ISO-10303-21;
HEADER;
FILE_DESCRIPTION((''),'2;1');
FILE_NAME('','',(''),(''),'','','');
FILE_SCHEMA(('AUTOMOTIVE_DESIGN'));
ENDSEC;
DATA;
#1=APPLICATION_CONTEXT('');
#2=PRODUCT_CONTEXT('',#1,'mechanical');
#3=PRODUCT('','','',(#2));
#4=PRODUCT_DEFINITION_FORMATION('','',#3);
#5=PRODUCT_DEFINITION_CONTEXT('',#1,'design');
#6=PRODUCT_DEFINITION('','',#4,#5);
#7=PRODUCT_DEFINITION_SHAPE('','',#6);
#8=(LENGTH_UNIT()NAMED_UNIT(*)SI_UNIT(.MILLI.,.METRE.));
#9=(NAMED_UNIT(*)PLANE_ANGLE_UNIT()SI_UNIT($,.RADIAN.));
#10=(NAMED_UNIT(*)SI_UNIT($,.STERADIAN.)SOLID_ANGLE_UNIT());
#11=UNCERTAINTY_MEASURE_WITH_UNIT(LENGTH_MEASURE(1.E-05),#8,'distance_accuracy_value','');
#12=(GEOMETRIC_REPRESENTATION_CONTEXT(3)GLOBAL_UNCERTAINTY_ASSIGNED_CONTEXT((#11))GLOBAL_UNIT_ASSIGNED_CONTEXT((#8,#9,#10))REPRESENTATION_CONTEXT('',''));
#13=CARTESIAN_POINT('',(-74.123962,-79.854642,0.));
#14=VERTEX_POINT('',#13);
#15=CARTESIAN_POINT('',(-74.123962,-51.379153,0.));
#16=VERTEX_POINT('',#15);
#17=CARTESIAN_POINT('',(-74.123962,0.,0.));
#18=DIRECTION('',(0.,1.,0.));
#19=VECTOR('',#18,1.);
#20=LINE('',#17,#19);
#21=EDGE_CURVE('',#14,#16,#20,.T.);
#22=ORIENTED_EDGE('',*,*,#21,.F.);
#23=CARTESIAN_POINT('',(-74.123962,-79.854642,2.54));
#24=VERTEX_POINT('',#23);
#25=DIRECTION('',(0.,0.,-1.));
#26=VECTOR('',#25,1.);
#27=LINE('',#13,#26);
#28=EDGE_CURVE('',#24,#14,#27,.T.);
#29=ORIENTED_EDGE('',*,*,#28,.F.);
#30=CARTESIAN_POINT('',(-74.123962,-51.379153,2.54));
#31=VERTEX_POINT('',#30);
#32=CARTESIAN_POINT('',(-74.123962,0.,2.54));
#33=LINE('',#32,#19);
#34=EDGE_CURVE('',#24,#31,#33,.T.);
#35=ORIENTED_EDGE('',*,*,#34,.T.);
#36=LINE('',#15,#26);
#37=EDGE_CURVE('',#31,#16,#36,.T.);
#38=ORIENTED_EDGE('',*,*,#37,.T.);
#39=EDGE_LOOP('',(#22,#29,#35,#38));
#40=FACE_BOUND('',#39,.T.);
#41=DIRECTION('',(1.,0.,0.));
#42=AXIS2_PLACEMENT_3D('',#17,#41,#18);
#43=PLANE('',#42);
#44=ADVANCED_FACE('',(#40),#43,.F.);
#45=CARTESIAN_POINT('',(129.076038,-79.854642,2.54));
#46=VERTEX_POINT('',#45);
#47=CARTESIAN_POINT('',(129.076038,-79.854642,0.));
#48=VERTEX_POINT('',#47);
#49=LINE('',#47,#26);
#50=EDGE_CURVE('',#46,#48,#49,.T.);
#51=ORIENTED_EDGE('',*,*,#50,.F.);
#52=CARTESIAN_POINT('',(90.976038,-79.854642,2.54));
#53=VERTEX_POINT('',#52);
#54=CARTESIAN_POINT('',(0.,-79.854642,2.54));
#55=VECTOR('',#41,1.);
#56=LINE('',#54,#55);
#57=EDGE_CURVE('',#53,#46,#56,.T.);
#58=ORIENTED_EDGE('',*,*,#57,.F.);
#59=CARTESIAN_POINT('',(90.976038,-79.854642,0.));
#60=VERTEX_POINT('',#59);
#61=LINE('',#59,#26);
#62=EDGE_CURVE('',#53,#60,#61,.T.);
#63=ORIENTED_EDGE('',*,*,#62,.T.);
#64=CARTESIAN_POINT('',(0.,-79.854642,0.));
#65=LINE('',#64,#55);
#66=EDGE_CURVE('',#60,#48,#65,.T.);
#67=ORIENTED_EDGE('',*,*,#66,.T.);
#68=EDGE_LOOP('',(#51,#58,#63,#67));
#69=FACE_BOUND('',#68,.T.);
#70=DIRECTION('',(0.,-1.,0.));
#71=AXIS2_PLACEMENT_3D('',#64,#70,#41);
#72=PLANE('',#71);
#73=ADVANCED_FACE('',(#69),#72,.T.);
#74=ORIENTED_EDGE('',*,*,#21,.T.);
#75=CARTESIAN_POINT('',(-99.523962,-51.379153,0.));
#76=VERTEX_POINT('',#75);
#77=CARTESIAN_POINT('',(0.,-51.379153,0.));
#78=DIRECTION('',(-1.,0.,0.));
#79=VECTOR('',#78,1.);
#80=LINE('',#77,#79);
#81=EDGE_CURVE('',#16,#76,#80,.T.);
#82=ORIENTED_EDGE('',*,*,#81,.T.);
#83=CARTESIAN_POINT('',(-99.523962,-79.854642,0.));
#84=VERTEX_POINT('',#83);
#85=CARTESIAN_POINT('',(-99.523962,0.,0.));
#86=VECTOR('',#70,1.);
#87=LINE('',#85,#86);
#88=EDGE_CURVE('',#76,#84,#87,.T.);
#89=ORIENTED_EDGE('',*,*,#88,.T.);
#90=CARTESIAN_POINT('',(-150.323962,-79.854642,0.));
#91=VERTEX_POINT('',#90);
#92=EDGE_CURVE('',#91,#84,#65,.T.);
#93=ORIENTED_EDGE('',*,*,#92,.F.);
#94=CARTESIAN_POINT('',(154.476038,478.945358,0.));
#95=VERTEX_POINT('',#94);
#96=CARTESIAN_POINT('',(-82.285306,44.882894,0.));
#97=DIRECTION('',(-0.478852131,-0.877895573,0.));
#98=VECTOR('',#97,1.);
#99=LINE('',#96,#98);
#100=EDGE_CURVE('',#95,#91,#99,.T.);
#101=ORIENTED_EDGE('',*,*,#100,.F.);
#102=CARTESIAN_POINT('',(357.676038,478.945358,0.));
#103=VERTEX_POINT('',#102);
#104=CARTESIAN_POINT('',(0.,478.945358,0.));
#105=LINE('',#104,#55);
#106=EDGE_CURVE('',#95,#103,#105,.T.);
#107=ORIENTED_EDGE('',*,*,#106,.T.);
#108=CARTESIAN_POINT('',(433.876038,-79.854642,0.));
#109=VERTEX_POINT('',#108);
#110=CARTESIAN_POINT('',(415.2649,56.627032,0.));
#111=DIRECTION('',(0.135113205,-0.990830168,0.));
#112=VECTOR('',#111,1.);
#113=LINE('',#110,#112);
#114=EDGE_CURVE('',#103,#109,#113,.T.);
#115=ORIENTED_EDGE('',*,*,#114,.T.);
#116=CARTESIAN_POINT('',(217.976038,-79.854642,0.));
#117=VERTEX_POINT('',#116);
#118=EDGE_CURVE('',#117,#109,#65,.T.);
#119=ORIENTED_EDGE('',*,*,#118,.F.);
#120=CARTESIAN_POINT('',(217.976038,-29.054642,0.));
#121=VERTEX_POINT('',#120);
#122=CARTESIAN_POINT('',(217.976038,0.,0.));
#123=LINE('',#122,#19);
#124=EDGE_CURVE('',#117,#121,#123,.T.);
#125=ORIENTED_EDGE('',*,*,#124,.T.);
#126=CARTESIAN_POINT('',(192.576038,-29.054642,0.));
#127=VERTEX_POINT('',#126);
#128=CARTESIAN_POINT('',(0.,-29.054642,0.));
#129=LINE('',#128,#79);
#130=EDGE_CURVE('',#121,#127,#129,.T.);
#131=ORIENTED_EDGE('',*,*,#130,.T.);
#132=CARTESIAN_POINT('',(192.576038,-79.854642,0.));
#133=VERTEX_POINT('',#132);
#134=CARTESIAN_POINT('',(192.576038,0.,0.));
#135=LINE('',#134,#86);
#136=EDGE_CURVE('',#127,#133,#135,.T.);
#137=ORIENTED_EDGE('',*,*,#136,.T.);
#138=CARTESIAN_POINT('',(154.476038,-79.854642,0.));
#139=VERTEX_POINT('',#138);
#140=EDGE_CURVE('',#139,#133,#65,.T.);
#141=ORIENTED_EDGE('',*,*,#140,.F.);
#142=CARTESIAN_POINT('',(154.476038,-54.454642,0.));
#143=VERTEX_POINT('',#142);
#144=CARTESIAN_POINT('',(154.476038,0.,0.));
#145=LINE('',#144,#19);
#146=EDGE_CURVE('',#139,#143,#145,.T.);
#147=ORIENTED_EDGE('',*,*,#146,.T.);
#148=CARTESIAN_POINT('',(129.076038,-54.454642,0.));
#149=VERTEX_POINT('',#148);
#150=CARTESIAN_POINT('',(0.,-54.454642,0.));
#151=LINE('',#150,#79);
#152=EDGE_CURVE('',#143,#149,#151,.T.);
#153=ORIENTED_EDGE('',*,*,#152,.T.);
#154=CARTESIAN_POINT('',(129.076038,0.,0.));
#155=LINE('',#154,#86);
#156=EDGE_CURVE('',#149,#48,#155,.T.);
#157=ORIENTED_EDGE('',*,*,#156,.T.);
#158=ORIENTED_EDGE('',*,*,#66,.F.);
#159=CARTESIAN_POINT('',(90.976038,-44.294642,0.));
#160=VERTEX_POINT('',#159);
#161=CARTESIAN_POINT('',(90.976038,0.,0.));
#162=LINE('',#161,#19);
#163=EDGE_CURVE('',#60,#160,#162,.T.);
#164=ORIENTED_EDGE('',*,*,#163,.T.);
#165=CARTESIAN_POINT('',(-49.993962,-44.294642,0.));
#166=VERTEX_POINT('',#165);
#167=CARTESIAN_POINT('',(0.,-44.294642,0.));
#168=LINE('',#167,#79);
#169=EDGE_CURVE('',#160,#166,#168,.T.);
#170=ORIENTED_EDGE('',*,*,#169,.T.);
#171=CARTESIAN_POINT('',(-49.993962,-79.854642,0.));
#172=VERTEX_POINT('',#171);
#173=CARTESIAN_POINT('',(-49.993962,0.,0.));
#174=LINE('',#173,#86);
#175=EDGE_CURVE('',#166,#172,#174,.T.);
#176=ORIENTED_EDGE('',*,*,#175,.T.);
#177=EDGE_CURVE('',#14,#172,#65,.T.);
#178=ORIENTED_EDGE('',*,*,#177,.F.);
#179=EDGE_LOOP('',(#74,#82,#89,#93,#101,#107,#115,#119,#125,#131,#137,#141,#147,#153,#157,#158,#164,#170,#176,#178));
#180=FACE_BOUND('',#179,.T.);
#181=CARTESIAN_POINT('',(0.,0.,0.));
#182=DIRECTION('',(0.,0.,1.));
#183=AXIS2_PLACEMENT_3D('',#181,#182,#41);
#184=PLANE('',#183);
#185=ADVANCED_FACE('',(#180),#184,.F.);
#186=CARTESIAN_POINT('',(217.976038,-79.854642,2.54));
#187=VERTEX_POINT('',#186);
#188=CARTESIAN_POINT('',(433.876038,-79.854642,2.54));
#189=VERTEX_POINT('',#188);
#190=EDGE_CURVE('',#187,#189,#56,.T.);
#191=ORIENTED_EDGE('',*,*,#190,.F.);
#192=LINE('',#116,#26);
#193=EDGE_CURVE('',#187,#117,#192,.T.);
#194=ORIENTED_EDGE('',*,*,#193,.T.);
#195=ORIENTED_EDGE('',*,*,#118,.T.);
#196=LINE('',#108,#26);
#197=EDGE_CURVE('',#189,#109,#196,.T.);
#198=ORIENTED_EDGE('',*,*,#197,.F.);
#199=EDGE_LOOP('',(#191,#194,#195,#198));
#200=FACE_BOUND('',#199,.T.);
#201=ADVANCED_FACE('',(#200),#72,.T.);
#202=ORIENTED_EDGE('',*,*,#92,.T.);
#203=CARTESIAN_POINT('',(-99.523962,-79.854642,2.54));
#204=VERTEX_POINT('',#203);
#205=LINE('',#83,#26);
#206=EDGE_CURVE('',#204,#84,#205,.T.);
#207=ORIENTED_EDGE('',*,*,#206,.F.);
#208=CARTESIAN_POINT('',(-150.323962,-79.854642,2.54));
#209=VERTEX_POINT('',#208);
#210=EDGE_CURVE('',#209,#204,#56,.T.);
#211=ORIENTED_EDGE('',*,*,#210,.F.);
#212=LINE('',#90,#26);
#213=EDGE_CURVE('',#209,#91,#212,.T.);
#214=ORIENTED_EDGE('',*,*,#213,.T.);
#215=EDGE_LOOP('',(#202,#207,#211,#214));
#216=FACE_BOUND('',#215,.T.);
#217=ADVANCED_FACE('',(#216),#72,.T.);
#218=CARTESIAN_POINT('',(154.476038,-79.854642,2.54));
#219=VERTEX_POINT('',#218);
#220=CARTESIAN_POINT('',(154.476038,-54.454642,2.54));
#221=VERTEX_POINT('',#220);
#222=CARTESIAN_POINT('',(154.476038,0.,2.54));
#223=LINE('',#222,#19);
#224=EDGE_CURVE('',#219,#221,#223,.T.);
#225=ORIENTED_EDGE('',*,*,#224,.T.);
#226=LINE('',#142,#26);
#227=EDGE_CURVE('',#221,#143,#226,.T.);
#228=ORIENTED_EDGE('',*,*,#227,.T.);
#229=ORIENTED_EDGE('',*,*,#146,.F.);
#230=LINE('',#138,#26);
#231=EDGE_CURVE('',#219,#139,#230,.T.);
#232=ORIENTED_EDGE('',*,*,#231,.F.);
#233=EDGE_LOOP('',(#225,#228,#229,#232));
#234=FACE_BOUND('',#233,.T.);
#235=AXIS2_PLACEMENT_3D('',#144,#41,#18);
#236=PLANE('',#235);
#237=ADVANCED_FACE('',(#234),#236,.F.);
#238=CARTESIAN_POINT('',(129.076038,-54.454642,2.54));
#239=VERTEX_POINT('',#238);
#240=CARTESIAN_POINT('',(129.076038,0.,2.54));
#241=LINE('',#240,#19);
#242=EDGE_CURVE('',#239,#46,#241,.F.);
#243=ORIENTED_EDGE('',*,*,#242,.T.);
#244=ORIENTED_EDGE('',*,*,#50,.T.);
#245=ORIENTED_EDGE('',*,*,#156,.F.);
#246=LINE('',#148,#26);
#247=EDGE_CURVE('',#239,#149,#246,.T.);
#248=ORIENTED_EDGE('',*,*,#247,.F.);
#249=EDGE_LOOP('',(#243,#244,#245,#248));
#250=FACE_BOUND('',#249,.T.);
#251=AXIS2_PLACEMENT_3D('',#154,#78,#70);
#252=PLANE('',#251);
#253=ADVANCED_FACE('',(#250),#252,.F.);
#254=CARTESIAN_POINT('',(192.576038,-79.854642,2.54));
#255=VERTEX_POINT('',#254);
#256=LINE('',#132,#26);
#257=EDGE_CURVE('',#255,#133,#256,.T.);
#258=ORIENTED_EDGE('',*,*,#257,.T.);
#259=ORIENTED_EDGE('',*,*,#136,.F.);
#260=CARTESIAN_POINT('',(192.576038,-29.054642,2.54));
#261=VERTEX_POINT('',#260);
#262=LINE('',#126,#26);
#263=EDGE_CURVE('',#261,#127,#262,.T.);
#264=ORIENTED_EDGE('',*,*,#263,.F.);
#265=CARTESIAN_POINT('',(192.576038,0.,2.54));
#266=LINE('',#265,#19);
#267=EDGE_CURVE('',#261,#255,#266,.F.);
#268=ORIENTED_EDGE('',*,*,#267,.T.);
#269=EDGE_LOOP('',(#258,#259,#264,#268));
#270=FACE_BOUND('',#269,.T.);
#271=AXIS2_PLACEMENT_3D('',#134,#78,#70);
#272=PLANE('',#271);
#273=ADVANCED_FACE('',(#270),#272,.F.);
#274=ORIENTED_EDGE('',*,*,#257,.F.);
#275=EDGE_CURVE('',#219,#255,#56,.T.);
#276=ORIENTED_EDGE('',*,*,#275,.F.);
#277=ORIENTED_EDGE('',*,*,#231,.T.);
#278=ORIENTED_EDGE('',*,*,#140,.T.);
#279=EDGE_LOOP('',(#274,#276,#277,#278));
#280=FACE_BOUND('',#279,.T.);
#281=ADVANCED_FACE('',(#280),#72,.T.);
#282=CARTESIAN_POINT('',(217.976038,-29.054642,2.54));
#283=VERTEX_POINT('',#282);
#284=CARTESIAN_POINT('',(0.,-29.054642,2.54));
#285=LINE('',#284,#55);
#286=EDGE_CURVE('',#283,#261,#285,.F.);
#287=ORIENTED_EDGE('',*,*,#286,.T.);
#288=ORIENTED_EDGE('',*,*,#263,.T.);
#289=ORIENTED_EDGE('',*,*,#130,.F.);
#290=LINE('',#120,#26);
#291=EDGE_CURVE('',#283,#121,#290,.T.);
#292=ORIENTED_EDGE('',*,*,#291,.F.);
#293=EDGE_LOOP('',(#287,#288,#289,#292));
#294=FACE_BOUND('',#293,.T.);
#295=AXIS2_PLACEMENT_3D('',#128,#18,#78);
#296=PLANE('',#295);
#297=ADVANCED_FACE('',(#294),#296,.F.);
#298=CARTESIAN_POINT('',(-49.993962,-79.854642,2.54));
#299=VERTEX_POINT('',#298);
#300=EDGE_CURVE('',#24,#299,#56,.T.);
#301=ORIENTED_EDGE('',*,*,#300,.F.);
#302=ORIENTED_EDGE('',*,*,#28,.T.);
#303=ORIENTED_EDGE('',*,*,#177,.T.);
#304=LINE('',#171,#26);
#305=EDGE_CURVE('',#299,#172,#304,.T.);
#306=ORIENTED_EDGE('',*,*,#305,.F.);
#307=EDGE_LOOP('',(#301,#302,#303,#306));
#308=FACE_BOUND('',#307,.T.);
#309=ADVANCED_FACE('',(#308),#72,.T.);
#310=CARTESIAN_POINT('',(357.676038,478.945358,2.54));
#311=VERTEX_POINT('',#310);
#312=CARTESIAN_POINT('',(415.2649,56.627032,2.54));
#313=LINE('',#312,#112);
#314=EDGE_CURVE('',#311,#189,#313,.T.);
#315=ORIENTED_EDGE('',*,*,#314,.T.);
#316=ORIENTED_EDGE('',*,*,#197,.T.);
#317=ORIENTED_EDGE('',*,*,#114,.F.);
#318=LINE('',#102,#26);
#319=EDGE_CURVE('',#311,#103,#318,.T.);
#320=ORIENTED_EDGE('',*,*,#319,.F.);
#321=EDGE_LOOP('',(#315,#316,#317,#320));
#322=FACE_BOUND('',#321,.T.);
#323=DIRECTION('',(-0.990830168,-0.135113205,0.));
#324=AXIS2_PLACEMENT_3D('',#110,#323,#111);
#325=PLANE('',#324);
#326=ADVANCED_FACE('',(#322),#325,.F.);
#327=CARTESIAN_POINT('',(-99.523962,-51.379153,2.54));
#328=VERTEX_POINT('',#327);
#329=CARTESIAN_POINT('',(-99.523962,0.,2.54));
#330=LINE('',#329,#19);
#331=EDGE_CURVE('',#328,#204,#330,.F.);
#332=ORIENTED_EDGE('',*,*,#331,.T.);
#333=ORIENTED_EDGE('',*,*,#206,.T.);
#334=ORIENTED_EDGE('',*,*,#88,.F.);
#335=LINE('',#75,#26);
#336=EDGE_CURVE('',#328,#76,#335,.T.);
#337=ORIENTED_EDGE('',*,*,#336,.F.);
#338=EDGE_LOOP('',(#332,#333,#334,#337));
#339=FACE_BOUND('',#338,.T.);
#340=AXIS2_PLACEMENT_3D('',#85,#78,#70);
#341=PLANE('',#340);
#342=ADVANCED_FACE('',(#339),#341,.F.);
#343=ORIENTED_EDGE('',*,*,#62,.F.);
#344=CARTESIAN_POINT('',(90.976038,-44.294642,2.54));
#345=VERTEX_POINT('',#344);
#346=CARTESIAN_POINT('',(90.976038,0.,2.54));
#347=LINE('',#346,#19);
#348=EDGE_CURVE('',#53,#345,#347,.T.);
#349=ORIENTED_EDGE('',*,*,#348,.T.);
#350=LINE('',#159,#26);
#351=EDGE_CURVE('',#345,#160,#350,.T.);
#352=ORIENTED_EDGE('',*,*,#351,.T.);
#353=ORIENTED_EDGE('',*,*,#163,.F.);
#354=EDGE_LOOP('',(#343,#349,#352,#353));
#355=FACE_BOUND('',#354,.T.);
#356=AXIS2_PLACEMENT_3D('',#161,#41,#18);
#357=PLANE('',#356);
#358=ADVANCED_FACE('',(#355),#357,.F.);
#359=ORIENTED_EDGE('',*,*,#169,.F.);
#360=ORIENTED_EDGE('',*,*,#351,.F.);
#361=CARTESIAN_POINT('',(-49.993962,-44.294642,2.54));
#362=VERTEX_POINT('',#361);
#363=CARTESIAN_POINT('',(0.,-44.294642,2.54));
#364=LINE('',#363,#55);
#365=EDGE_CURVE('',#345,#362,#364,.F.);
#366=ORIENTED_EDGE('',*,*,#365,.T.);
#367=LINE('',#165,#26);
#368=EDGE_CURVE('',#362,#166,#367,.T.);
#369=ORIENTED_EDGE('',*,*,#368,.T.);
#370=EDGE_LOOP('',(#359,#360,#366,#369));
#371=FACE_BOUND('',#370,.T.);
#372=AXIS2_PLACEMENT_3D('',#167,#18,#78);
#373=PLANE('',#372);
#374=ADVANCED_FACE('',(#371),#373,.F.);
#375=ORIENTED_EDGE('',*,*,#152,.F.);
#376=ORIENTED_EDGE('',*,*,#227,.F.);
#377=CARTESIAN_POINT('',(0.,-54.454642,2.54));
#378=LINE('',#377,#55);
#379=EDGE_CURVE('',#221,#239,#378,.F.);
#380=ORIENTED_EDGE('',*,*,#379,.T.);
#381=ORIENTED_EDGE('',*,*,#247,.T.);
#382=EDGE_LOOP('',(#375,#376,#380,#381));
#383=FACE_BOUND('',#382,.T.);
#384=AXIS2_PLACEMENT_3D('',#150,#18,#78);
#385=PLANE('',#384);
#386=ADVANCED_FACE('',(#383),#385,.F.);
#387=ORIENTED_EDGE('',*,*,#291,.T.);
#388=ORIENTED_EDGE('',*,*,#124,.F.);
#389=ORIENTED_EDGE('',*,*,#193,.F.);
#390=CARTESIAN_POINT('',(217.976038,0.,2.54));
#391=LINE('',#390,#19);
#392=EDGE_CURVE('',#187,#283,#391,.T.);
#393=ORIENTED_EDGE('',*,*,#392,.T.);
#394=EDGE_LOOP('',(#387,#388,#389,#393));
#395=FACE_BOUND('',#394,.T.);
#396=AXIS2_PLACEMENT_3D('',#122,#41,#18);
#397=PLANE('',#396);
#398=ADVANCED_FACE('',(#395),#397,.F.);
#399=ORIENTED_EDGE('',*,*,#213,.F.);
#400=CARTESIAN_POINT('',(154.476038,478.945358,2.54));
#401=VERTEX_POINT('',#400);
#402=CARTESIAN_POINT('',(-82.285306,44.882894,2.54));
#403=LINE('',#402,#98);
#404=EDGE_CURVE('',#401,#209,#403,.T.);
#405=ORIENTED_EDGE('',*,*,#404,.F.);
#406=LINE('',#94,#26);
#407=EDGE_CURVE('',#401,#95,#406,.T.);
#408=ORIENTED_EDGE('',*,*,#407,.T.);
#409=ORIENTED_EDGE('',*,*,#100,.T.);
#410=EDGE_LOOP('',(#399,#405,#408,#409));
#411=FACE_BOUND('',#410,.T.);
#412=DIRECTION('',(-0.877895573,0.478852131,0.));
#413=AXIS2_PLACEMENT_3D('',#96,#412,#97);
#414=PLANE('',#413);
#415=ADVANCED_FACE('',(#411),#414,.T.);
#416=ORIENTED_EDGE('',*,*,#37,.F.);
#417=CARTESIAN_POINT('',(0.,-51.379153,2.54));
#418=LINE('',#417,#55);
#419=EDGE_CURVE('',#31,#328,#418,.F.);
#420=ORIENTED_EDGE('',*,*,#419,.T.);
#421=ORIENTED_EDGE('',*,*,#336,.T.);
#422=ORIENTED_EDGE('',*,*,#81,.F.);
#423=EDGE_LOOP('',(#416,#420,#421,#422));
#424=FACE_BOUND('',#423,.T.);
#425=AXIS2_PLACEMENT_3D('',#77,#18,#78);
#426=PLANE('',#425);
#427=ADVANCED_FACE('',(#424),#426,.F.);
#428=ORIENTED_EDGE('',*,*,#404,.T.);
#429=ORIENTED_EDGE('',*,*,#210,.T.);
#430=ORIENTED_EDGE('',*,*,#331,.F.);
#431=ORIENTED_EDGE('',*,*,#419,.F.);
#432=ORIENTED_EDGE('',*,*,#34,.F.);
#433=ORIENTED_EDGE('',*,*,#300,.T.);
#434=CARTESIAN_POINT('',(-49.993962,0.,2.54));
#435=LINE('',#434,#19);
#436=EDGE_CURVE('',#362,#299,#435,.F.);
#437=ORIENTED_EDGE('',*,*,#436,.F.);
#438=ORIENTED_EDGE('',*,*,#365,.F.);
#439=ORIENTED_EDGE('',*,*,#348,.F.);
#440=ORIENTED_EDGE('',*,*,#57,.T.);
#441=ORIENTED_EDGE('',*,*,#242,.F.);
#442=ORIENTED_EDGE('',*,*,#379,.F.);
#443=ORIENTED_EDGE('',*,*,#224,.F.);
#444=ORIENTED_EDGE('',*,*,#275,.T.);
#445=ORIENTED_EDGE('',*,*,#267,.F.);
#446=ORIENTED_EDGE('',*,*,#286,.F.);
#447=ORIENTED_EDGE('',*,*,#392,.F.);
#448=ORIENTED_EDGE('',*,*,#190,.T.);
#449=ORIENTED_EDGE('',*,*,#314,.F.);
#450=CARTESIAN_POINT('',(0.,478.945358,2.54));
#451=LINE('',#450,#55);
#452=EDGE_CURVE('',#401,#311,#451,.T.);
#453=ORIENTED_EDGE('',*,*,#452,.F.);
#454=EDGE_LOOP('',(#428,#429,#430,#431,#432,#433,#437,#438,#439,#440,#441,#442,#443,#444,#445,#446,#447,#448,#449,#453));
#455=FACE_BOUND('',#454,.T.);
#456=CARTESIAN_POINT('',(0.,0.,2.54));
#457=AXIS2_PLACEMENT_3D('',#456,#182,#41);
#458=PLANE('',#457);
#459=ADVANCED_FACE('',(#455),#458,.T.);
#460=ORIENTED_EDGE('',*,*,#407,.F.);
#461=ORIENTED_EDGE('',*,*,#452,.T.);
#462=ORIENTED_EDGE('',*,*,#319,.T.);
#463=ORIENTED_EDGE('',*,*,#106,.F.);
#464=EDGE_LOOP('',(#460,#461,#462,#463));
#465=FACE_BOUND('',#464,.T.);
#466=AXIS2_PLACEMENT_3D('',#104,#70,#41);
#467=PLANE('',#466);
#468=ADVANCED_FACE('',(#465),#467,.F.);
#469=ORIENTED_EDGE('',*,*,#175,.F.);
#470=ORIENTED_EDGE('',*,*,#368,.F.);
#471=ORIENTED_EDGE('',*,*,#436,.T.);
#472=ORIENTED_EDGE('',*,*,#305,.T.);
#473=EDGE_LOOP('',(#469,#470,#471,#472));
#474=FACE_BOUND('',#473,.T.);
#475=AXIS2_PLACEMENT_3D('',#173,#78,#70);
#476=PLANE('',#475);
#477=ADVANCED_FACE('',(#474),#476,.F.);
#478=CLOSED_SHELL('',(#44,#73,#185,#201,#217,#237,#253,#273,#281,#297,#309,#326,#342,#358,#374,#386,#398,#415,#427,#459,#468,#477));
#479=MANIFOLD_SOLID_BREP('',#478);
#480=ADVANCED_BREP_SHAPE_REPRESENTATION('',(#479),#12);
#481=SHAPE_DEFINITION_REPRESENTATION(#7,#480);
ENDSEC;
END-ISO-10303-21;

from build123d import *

# Parameters (mm, degrees)
BOSS_EXTRUDE6_DEPTH = 2.54


with BuildPart() as part:
    # Sketch1 → Boss-Extrude6 (new body)
    with BuildSketch(Plane.XY):
        Polygon((357.676037853, 478.945357805), (154.476037853, 478.945357805), (-150.323962147, -79.854642195), (-99.523962147, -79.854642195), (-99.523962147, -51.379153094), (-74.123962147, -51.379153094), (-74.123962147, -79.854642195), (-49.993962147, -79.854642195), (-49.993962147, -44.294642195), (90.976037853, -44.294642195), (90.976037853, -79.854642195), (129.076037853, -79.854642195), (129.076037853, -54.454642195), (154.476037853, -54.454642195), (154.476037853, -79.854642195), (192.576037853, -79.854642195), (192.576037853, -29.054642195), (217.976037853, -29.054642195), (217.976037853, -79.854642195), (433.876037853, -79.854642195), align=None)
    extrude(amount=BOSS_EXTRUDE6_DEPTH)


solid = part.part
